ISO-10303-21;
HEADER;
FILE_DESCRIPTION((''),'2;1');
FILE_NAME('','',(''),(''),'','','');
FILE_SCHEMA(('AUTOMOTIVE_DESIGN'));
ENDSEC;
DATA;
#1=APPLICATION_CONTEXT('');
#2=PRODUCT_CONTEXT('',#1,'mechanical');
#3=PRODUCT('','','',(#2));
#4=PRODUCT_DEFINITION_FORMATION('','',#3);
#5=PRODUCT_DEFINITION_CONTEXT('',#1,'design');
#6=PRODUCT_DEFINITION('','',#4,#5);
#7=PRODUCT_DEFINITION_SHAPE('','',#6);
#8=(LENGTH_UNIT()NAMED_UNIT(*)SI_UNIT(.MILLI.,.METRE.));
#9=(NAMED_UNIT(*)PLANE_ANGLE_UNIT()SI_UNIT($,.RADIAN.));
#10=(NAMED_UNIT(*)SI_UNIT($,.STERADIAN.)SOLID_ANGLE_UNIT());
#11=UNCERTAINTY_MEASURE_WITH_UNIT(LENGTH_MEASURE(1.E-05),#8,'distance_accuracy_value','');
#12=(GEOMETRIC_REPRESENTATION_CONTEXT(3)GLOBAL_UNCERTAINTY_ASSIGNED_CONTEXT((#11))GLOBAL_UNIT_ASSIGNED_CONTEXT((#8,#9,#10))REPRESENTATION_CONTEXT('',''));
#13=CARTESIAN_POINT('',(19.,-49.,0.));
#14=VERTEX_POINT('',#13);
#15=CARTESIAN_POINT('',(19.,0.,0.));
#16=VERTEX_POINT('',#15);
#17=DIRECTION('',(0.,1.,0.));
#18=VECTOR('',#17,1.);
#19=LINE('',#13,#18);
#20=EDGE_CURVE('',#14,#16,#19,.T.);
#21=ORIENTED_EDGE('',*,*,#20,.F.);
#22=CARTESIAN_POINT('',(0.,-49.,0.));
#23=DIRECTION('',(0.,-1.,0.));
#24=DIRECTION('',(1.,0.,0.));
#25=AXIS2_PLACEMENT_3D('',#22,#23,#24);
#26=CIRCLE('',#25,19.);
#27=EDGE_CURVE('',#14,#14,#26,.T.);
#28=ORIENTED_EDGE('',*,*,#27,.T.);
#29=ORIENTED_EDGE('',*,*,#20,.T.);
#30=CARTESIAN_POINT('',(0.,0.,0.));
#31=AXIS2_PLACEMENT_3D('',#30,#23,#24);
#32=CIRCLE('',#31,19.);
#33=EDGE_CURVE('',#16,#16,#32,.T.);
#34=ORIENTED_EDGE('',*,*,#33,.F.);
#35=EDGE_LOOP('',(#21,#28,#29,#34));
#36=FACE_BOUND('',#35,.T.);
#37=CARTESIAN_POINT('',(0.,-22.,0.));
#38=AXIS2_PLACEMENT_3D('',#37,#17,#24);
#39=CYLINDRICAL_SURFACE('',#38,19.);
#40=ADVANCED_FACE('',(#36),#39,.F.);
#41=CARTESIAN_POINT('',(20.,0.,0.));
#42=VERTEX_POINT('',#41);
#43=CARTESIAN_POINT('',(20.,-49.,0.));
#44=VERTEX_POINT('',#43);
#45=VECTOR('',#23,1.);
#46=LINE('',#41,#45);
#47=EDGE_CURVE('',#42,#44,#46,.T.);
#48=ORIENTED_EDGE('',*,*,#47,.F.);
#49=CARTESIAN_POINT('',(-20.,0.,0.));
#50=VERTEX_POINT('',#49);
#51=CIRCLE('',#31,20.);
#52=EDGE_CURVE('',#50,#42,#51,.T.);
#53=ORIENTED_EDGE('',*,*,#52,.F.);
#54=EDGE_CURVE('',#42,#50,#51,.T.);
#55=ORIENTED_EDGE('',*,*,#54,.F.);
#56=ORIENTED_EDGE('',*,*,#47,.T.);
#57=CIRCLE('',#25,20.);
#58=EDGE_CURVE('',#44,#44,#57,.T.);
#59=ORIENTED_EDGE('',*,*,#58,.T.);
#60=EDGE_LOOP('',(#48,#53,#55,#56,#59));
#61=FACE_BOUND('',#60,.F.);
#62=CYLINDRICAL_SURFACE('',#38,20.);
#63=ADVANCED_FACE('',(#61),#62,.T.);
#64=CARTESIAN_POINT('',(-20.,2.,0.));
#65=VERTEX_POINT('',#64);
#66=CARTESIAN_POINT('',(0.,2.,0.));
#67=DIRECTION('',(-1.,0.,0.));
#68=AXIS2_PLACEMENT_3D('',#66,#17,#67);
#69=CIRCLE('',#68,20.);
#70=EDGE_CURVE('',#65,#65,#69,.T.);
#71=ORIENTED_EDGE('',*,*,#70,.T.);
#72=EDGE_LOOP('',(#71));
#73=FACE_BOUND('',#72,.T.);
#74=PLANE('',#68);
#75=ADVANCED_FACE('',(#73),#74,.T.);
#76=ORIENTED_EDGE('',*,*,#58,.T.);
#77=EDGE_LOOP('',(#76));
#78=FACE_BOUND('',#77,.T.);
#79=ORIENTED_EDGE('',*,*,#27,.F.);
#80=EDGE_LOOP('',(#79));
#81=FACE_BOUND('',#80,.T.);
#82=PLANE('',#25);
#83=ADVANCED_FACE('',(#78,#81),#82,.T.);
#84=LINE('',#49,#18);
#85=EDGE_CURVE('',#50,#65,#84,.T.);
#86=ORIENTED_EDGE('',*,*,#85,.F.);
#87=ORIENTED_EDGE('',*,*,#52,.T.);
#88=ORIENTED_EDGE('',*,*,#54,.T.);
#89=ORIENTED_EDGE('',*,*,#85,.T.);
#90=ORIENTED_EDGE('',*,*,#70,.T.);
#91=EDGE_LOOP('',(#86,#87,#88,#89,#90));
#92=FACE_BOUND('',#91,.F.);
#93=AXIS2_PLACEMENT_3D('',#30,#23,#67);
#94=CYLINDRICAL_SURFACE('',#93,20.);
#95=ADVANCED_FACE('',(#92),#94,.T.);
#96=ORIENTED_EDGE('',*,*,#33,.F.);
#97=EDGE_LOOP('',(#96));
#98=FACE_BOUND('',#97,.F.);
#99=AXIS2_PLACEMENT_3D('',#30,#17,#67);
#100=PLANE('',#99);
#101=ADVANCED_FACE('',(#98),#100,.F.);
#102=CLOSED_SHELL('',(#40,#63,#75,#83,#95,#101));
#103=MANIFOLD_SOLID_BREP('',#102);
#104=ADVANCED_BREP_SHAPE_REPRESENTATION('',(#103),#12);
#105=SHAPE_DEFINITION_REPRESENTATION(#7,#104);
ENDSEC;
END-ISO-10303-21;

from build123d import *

# Parameters (mm, degrees)
F0_R     = 20
F0_R_2   = 19
F1_DEPTH = 22
F2_R     = 20
F2_R_2   = 19
F3_DEPTH = 27
F4_R     = 20
F4_R_2   = 19
F5_DEPTH = 2


with BuildPart() as f1:
    # F0 (on Front) → F1 (new body)
    with BuildSketch(Plane.XZ):
        Circle(F0_R)
        Circle(F0_R_2, mode=Mode.SUBTRACT)
    extrude(amount=F1_DEPTH)

    # F2 (on face) → F3 (join)
    with BuildSketch(Plane.XZ.offset(22)):
        Circle(F2_R)
        Circle(F2_R_2, mode=Mode.SUBTRACT)
    extrude(amount=F3_DEPTH)

    # F4 (on face) → F5 (join)
    with BuildSketch(Plane(origin=(0, 0, 0), x_dir=(-1, 0, 0), z_dir=(0, 1, 0))):
        Circle(F4_R)
        Circle(F4_R_2, mode=Mode.SUBTRACT)
        Circle(F4_R_2)
    extrude(amount=F5_DEPTH)


solid = f1.part
